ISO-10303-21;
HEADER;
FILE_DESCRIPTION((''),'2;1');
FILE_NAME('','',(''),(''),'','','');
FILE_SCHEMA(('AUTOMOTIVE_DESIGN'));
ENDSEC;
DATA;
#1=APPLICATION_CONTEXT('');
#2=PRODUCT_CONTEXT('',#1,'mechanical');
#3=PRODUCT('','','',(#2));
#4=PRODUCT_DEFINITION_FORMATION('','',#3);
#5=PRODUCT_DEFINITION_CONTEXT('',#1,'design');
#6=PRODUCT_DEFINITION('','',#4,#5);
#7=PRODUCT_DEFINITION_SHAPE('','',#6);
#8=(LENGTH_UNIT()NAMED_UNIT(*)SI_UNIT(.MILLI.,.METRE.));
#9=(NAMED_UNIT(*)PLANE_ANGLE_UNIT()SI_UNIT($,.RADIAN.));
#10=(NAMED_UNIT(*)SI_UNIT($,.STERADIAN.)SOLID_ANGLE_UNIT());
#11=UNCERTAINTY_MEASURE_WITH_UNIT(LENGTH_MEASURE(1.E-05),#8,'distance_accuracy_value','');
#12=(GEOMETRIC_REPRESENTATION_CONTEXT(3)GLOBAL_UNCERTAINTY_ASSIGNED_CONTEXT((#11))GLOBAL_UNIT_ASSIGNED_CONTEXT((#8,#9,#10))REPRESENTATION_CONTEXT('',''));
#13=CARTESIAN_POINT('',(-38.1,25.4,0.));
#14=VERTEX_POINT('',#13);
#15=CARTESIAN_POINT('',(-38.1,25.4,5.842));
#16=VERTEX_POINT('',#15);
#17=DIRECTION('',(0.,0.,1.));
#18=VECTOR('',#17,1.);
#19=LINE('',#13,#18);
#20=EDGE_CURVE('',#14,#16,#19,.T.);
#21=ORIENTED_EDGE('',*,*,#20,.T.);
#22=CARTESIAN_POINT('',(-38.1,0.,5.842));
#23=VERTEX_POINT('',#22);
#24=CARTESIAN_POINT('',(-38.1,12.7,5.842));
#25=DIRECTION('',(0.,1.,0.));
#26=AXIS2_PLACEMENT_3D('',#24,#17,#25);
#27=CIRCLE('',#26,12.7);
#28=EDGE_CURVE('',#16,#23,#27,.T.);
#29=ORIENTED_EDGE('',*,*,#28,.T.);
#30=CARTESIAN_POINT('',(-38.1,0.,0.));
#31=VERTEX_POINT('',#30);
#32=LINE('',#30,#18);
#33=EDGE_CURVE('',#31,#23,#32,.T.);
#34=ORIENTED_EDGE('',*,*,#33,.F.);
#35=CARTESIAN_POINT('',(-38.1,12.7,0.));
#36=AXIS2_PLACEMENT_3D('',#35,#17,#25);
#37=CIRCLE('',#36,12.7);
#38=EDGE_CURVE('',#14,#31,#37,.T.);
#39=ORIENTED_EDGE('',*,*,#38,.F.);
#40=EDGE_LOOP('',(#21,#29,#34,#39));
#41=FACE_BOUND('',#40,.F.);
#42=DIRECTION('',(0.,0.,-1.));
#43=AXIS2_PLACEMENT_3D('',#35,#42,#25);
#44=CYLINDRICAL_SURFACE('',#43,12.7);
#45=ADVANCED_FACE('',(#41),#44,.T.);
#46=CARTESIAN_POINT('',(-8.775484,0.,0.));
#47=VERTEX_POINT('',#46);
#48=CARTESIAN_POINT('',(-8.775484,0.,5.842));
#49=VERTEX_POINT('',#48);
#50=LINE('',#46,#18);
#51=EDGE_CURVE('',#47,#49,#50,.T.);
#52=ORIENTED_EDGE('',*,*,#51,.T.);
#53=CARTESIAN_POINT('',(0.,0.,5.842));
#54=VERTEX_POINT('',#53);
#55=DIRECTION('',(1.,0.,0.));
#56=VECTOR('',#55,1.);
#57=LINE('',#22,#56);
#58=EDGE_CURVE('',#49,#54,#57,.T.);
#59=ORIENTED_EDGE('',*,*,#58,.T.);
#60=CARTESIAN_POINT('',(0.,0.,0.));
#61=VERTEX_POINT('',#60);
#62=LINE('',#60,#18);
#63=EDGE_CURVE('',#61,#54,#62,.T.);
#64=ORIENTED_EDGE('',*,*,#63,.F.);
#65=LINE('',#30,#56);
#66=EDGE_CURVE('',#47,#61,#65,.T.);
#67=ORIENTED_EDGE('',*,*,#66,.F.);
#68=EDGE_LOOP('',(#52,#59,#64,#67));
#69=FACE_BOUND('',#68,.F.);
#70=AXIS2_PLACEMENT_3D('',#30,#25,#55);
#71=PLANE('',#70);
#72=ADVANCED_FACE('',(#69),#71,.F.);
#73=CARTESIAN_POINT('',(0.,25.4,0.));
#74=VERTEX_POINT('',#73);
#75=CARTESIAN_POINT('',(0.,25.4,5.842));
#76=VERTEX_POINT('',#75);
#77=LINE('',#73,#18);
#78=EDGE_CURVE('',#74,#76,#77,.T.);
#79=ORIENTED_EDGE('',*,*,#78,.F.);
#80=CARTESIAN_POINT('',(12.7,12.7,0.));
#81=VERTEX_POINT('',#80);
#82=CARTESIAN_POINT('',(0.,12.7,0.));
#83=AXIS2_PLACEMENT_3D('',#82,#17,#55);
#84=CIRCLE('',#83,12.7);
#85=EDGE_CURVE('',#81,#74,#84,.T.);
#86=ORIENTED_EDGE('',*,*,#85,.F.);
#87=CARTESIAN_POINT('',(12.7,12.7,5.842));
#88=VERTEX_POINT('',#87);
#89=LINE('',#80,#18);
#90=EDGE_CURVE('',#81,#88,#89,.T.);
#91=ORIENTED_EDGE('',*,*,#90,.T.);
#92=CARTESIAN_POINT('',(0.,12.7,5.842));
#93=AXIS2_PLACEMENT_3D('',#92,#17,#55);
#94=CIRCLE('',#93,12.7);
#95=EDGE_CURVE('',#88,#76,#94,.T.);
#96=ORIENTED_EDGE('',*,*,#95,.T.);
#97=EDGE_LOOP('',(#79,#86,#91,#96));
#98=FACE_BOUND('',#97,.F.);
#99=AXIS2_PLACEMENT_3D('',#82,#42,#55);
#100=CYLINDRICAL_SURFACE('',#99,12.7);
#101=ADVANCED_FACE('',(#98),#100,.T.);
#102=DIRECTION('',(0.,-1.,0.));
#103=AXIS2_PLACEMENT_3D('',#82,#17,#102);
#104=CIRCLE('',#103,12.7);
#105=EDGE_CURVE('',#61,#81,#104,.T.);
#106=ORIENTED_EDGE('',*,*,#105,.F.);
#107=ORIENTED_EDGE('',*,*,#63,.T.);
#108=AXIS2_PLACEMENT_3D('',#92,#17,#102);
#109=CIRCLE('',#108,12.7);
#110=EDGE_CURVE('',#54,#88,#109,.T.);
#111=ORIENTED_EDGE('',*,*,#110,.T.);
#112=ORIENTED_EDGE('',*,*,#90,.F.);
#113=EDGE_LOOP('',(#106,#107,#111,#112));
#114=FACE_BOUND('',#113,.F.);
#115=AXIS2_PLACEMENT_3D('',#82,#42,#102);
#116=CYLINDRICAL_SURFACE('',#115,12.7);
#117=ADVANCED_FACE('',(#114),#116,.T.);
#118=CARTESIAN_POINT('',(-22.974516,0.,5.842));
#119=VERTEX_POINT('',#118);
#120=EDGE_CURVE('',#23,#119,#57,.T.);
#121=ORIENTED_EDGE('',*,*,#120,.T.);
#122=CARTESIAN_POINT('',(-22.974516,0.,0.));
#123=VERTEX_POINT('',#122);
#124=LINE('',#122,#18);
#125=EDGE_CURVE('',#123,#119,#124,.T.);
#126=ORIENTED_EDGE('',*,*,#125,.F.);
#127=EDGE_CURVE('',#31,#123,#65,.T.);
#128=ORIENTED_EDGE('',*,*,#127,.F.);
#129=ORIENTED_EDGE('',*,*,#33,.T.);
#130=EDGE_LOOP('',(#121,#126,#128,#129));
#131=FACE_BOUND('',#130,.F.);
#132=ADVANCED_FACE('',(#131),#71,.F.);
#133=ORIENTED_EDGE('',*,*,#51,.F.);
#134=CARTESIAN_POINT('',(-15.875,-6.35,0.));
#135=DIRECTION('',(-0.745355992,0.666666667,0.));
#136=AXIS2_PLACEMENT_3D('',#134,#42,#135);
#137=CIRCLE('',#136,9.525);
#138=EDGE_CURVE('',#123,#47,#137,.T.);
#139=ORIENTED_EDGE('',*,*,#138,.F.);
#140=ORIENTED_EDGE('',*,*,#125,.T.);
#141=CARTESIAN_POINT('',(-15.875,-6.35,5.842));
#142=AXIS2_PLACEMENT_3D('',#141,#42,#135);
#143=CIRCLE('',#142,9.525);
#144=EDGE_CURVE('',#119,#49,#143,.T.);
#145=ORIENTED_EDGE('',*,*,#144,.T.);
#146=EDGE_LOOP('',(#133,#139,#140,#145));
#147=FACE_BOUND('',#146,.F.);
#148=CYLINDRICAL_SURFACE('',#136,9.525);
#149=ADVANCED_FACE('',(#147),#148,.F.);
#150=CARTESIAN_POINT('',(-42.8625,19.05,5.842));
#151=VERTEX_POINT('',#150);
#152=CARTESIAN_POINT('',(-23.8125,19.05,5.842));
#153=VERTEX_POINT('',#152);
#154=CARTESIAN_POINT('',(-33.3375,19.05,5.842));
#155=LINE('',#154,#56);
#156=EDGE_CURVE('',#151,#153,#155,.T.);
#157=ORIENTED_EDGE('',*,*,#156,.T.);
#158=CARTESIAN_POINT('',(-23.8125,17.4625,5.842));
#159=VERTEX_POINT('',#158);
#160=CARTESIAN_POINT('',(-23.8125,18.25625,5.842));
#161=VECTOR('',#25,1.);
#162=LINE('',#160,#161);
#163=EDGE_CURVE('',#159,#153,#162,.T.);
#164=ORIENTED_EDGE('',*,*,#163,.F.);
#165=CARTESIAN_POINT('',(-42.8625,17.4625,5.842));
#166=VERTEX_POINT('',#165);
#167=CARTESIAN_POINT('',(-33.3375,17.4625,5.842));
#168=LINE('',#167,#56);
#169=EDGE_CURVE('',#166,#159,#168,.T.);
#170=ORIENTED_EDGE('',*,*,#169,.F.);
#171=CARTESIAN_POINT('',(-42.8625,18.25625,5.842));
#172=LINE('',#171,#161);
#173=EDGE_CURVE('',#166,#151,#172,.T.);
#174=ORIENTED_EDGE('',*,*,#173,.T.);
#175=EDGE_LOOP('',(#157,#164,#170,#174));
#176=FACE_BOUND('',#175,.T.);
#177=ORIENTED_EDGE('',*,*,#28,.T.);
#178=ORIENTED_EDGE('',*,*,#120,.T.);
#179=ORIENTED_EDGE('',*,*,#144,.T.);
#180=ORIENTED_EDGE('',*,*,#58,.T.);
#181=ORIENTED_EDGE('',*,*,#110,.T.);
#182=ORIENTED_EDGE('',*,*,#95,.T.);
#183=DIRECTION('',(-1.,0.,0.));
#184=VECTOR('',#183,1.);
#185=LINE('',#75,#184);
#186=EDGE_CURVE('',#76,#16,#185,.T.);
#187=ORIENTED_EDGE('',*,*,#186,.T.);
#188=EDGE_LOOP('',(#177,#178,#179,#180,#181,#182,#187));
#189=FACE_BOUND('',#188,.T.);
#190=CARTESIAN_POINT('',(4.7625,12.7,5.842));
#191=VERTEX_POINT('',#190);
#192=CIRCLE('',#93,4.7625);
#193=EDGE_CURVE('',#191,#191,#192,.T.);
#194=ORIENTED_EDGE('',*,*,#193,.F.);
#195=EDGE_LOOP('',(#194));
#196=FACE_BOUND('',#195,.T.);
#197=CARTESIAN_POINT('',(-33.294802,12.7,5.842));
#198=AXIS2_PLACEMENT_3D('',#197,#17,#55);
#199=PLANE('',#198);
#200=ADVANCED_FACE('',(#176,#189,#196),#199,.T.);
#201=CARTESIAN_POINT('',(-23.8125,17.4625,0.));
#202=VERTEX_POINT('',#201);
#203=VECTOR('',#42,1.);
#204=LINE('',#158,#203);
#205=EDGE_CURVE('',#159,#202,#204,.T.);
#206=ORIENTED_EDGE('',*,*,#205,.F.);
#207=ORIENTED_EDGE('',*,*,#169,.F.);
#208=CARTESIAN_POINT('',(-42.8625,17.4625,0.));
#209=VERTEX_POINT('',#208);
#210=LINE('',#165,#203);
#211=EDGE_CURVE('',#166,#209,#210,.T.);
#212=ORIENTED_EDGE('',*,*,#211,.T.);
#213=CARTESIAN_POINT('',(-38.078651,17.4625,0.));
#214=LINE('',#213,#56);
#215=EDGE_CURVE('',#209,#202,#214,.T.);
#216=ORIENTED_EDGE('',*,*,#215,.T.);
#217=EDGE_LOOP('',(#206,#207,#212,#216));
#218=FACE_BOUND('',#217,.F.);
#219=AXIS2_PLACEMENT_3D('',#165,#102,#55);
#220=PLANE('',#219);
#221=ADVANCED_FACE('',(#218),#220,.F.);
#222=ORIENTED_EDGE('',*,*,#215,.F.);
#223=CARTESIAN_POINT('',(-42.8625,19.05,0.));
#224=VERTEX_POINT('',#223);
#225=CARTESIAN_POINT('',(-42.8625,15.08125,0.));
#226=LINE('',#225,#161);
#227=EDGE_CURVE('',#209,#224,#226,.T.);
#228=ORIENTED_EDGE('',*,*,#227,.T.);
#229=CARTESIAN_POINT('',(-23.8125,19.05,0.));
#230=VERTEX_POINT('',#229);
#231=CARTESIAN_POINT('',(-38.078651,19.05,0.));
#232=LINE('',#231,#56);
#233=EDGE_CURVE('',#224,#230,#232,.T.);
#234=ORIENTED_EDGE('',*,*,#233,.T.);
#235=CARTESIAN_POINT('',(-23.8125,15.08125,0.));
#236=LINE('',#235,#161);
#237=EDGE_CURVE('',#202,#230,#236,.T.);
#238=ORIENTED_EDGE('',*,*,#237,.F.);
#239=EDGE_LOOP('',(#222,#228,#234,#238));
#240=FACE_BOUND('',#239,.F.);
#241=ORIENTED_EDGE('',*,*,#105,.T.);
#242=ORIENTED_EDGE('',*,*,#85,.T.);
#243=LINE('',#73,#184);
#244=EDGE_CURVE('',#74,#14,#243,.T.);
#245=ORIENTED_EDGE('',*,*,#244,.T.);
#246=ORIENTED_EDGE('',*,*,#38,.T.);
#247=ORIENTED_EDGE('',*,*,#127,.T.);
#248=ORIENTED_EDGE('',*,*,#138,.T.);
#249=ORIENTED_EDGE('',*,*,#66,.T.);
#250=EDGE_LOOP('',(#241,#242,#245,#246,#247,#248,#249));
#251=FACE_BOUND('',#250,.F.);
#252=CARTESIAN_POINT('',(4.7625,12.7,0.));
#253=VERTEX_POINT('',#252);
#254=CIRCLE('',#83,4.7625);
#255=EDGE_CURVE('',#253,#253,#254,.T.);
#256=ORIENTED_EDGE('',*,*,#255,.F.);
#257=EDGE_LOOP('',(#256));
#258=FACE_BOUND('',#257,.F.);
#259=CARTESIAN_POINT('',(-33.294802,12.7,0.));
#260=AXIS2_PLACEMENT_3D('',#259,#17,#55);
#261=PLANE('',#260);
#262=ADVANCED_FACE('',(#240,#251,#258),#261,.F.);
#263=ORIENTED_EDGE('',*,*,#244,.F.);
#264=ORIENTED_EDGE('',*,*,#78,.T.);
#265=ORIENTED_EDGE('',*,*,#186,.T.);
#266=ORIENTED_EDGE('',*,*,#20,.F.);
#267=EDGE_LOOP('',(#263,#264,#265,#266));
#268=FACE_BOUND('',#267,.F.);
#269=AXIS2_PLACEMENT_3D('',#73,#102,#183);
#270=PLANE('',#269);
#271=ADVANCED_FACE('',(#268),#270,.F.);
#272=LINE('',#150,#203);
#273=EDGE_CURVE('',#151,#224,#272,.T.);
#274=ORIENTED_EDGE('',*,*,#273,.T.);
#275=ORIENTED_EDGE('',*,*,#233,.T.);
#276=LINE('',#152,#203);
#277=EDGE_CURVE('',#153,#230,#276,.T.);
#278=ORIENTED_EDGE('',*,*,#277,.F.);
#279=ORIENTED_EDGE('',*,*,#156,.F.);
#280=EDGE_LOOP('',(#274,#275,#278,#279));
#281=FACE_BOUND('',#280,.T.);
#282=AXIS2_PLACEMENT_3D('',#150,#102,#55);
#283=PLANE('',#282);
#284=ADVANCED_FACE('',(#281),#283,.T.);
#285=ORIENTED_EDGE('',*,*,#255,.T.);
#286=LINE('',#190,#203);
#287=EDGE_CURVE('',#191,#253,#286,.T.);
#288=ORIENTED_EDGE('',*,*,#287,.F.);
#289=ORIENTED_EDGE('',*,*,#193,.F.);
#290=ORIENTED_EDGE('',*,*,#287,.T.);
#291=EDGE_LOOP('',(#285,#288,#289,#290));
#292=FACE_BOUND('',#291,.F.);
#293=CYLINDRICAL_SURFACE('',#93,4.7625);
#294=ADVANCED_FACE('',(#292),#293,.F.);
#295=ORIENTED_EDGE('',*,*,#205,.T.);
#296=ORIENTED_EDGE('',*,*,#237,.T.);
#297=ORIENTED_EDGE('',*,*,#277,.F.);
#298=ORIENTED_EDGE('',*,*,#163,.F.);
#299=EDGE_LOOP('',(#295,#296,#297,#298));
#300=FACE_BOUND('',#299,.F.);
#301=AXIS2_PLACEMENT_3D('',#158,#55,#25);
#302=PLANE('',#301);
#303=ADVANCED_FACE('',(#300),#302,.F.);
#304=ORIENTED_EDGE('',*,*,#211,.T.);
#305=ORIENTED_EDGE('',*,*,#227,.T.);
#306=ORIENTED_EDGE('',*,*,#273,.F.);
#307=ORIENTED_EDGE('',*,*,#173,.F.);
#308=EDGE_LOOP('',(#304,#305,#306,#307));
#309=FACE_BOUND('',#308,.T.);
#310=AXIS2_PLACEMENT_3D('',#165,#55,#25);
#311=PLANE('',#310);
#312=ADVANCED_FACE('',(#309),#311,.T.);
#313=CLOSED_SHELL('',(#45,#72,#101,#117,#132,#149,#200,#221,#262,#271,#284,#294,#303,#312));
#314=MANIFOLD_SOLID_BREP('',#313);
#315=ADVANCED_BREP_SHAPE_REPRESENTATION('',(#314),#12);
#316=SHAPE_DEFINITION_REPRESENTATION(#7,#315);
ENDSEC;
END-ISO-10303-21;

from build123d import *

# Parameters (mm, degrees)
F1_DEPTH = 5.842
F2_R     = 4.7625
F3_DEPTH = 25.4
F4_W     = 19.05
F4_H     = 1.5875
F5_DEPTH = 25.4
F7_DEPTH = 25.4


# Not quite as in the source:
# - a feature names something its author has since deleted; it is built from what else it names


with BuildPart() as f1:
    # F0 (on Top) → F1 (new body)
    with BuildSketch(Plane.XY):
        with BuildLine():
            Line((-38.1, 25.4), (-38.1, 0))
            ThreePointArc((-38.1, 0), (-29.1197438789, 3.7197438789), (-25.4, 12.7))
            ThreePointArc((-25.4, 12.7), (-29.1197438789, 21.6802561211), (-38.1, 25.4))
        make_face()
        with BuildLine():
            ThreePointArc((0, 25.4), (-12.7, 12.7), (0, 0))
            Line((0, 0), (0, 25.4))
        make_face()
        with BuildLine():
            Line((-38.1, 0), (0, 0))
            ThreePointArc((0, 0), (-12.7, 12.7), (0, 25.4))
            Line((0, 25.4), (-38.1, 25.4))
            ThreePointArc((-38.1, 25.4), (-29.1197438789, 21.6802561211), (-25.4, 12.7))
            ThreePointArc((-25.4, 12.7), (-29.1197438789, 3.7197438789), (-38.1, 0))
        make_face()
        with BuildLine():
            Line((0, 25.4), (0, 0))
            ThreePointArc((0, 0), (8.9802561211, 3.7197438789), (12.7, 12.7))
            ThreePointArc((12.7, 12.7), (8.9802561211, 21.6802561211), (0, 25.4))
        make_face()
        with BuildLine():
            ThreePointArc((-38.1, 25.4), (-50.8, 12.7), (-38.1, 0))
            Line((-38.1, 0), (-38.1, 25.4))
        make_face()
    extrude(amount=F1_DEPTH)

    # F2 (on face) → F3 (cut)
    with BuildSketch(Plane.XY.offset(5.842)):
        with Locations((0, 12.7)):
            Circle(F2_R)
    extrude(amount=-F3_DEPTH, mode=Mode.SUBTRACT)

    # F4 (on face) → F5 (cut)
    with BuildSketch(Plane.XY.offset(5.842)):
        with Locations((-33.3375, 18.25625)):
            Rectangle(F4_W, F4_H)
    extrude(amount=-F5_DEPTH, mode=Mode.SUBTRACT)

    # F6 (on face) → F7 (cut)
    with BuildSketch(Plane(origin=(0, 0, 0), x_dir=(1, 0, 0), z_dir=(0, 0, -1))):
        with BuildLine():
            Line((-8.7754841714, 0), (-22.9745158286, 0))
            ThreePointArc((-22.9745158286, 0), (-15.875, -3.175), (-8.7754841714, 0))
        make_face()
    extrude(amount=-F7_DEPTH, mode=Mode.SUBTRACT)


solid = f1.part
